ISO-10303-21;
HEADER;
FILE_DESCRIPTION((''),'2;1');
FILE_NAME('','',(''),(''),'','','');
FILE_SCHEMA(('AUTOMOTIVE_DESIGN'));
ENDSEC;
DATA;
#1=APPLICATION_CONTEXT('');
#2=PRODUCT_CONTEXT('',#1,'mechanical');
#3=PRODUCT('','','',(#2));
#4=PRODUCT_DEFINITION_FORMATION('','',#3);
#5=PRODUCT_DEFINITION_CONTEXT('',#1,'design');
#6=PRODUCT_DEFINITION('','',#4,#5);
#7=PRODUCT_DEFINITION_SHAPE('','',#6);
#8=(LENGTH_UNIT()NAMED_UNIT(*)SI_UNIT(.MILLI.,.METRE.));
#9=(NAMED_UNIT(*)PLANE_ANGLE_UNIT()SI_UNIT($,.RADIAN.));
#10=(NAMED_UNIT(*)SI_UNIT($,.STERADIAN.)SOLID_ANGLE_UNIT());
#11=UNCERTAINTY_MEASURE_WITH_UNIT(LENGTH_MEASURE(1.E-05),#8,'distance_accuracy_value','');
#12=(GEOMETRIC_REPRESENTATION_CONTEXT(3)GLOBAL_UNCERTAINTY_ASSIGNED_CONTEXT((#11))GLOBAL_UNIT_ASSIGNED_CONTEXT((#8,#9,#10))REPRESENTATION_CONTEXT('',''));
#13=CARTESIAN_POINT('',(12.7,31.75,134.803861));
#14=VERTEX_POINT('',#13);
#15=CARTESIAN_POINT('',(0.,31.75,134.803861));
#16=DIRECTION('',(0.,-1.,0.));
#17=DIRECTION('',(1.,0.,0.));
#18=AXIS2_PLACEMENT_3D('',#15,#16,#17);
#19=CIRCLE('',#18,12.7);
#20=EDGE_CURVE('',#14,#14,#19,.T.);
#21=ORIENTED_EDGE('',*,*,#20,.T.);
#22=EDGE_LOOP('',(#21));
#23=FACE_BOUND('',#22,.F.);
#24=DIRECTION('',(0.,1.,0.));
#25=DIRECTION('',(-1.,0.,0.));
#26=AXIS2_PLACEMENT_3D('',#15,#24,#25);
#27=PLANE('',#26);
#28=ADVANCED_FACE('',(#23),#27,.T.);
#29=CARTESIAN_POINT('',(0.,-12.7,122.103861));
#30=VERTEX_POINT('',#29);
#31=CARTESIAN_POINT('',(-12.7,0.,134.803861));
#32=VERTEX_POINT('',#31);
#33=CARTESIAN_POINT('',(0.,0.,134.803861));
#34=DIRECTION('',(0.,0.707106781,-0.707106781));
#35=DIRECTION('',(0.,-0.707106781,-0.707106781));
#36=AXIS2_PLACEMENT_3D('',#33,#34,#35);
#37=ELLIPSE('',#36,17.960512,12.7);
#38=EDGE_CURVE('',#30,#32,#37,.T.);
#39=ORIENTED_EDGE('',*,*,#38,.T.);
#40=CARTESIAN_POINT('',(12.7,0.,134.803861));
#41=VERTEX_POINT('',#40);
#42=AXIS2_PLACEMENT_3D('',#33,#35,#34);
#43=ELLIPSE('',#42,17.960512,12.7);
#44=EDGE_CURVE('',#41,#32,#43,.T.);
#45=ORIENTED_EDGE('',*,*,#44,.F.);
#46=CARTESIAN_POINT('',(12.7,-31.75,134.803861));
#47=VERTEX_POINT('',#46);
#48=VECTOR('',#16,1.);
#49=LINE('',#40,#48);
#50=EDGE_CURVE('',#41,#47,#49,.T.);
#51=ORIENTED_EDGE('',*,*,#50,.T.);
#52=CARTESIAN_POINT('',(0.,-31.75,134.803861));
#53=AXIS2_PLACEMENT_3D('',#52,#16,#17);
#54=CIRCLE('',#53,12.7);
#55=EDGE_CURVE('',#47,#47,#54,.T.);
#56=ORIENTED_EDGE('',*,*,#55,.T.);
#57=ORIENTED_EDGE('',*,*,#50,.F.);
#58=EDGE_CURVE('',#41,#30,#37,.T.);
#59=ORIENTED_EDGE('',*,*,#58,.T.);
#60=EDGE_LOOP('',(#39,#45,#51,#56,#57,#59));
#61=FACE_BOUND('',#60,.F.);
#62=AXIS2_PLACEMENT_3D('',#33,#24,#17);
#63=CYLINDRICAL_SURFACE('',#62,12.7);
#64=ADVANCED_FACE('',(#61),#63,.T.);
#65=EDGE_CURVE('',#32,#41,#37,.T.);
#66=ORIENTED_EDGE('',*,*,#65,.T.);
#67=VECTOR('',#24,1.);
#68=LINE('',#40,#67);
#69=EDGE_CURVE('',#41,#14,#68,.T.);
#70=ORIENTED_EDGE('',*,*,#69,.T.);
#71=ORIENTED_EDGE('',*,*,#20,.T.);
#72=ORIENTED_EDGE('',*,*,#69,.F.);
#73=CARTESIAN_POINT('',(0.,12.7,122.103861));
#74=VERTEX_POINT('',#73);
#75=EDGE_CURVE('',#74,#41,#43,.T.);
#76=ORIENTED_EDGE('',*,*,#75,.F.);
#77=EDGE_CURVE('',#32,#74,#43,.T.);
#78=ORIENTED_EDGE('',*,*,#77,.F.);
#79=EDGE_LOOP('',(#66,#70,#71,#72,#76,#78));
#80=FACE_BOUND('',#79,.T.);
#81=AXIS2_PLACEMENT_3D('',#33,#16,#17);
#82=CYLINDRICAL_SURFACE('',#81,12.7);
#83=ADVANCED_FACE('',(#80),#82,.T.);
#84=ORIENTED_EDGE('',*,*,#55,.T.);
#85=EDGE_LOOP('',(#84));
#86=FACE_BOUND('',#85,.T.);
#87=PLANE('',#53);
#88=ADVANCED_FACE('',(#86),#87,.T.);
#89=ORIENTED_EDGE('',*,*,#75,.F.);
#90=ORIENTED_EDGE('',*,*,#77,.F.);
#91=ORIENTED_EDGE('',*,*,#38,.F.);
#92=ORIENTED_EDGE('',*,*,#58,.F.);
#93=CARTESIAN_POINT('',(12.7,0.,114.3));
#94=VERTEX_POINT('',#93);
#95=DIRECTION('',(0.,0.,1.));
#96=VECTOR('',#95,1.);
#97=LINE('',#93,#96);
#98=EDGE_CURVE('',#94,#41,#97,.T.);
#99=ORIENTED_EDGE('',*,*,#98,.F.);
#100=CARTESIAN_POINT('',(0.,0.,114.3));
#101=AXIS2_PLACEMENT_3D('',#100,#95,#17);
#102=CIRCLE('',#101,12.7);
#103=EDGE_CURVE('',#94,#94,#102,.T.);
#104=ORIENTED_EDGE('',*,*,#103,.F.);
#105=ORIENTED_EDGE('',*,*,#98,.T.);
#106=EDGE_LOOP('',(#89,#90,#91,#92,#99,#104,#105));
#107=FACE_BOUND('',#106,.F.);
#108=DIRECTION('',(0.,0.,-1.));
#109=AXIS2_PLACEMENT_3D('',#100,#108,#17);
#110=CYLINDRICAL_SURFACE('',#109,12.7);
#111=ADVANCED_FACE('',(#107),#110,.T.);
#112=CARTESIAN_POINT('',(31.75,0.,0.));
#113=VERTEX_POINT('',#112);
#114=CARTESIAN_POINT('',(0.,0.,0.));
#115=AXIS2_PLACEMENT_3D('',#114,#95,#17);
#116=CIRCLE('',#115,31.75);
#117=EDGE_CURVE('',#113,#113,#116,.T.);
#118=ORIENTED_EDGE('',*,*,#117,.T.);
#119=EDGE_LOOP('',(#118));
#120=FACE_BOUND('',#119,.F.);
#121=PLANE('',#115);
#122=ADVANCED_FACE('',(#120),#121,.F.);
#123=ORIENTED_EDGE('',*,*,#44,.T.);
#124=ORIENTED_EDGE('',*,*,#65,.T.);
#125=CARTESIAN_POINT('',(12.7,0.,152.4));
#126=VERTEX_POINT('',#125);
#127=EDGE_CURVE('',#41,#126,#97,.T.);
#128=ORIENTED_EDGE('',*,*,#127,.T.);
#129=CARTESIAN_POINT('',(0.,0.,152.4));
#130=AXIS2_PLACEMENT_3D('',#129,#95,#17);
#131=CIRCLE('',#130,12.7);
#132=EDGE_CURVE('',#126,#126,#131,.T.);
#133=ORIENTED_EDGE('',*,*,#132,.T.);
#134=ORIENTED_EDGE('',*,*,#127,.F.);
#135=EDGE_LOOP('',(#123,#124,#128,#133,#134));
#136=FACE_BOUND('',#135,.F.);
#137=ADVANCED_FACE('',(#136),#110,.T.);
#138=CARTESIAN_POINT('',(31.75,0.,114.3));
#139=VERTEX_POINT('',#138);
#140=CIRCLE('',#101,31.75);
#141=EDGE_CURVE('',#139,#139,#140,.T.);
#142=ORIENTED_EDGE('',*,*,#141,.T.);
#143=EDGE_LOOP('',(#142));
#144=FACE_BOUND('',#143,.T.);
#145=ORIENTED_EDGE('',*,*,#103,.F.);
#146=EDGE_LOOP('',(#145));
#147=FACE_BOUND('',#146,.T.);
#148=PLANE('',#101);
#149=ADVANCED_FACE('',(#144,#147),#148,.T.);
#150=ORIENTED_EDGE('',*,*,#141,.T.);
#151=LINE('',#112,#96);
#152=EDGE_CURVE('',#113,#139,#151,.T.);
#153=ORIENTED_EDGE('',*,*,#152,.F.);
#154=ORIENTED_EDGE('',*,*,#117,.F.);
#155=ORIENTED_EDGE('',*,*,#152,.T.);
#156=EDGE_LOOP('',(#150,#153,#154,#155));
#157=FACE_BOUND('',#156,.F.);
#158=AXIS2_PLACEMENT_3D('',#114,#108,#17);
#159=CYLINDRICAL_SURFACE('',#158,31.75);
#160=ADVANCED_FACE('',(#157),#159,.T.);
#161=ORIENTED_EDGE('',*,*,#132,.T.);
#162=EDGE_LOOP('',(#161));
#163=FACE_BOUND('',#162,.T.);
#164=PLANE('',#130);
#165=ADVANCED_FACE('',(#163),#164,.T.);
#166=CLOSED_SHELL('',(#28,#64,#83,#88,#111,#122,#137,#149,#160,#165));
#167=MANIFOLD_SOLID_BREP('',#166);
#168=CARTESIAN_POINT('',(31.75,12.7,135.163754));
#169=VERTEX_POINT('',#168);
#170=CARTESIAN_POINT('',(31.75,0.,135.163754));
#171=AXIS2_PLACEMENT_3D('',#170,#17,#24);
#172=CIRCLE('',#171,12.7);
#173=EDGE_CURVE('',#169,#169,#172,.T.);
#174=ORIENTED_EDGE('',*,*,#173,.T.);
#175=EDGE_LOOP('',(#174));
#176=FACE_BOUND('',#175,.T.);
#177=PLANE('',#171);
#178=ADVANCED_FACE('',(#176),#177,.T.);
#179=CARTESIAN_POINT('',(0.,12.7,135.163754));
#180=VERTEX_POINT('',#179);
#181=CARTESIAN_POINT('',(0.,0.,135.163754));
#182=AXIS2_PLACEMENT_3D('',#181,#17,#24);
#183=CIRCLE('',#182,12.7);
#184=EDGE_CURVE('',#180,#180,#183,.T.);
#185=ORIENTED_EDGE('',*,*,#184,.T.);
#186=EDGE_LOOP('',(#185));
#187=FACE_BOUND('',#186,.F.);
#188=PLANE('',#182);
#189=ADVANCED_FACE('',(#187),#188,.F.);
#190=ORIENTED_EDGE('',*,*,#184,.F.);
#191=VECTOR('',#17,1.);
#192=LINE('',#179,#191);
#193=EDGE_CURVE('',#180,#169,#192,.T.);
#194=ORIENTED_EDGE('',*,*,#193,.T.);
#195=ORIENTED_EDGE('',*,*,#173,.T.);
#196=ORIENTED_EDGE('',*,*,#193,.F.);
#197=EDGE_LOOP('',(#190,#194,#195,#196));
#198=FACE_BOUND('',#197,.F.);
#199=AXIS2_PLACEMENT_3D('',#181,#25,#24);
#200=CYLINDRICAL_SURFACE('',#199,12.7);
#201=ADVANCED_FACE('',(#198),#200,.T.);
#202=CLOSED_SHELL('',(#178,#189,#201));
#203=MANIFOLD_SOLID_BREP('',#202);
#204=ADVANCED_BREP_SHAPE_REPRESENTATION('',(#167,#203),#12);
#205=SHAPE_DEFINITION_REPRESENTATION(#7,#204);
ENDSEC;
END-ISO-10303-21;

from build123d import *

# Parameters (mm, degrees)
F0_R     = 31.75
F1_DEPTH = 114.3
F2_R     = 12.7
F3_DEPTH = 38.1
F4_R     = 12.7
F5_DEPTH = 31.75
F6_R     = 12.7
F7_DEPTH = 31.75


# Not quite as in the source:
# - a pattern or mirror of a feature is missing from the dataset's text; its kind, count and spacing are read off the source's solid


with BuildPart() as f1:
    # F0 (on Top) → F1 (new body)
    with BuildSketch(Plane.XY):
        Circle(F0_R)
    extrude(amount=F1_DEPTH)

    # F2 (on face) → F3 (join)
    with BuildSketch(Plane.XY.offset(114.3)):
        Circle(F2_R)
    extrude(amount=F3_DEPTH)

    # F4 (on Front) → F5 (join)
    with BuildSketch(Plane.XZ):
        with Locations((0, 134.8038613796)):
            Circle(F4_R)
    f5 = extrude(amount=F5_DEPTH)

    # F5_copies: F5 across plane
    add(f5.mirror(Plane.ZX))


with BuildPart() as f7:
    # F6 (on Right) → F7 (new body)
    with BuildSketch(Plane.YZ):
        with Locations((0, 135.1637542248)):
            Circle(F6_R)
    extrude(amount=F7_DEPTH)


solid = Compound([f1.part, f7.part])
